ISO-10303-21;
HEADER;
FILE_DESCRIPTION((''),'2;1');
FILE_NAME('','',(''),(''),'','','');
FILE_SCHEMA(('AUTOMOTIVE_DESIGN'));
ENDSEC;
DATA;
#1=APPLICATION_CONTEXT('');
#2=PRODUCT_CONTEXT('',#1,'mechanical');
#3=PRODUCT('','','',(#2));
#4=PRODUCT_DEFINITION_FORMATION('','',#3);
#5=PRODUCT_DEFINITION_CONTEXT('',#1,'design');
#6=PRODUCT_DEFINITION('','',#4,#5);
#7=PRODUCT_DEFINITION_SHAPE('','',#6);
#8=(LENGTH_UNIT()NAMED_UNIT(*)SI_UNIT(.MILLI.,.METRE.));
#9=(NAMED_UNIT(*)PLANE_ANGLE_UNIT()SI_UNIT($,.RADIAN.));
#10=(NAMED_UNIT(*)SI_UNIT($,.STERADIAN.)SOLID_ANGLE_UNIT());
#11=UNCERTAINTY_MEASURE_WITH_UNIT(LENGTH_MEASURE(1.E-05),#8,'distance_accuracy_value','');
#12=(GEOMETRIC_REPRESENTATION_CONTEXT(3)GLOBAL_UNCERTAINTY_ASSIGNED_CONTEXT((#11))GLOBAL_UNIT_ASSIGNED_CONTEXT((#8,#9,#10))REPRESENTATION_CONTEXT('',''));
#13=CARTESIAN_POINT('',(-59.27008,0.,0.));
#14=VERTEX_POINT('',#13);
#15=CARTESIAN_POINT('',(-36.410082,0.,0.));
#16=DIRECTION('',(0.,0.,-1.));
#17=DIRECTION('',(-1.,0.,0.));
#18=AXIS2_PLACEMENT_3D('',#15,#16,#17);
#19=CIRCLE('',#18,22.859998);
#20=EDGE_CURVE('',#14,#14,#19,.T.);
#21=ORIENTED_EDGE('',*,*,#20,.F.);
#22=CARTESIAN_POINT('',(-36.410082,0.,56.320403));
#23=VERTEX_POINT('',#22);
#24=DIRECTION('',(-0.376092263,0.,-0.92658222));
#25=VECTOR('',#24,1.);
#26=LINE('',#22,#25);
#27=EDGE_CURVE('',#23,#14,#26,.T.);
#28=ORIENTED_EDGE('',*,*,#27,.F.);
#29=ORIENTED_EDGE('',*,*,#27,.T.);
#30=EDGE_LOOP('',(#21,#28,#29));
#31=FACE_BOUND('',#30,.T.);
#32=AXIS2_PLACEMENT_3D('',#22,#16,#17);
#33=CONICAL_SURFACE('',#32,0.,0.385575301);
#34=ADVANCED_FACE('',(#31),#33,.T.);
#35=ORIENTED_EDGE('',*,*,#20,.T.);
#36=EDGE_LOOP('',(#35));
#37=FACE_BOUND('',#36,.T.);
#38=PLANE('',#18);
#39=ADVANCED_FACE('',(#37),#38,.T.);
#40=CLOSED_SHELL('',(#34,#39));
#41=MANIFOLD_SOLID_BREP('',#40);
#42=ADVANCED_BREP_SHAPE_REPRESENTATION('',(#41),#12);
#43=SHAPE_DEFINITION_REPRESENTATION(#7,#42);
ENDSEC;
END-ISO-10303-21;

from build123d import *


# Not quite as in the source:
# - the program builds the solid bodies; features that only make, move or delete a surface that nothing else refers to are left out


with BuildPart() as f1:
    # F0 (on Front) → F1 (revolve)
    with BuildSketch(Plane.XZ):
        Polygon((-36.4100821316, 0), (-36.4100821316, 56.3204027712), (-59.270080179, 0), align=None)
    revolve(axis=Axis((-36.4100821316, 0, 28.1602013856), (0, 0, -1)))


solid = f1.part
